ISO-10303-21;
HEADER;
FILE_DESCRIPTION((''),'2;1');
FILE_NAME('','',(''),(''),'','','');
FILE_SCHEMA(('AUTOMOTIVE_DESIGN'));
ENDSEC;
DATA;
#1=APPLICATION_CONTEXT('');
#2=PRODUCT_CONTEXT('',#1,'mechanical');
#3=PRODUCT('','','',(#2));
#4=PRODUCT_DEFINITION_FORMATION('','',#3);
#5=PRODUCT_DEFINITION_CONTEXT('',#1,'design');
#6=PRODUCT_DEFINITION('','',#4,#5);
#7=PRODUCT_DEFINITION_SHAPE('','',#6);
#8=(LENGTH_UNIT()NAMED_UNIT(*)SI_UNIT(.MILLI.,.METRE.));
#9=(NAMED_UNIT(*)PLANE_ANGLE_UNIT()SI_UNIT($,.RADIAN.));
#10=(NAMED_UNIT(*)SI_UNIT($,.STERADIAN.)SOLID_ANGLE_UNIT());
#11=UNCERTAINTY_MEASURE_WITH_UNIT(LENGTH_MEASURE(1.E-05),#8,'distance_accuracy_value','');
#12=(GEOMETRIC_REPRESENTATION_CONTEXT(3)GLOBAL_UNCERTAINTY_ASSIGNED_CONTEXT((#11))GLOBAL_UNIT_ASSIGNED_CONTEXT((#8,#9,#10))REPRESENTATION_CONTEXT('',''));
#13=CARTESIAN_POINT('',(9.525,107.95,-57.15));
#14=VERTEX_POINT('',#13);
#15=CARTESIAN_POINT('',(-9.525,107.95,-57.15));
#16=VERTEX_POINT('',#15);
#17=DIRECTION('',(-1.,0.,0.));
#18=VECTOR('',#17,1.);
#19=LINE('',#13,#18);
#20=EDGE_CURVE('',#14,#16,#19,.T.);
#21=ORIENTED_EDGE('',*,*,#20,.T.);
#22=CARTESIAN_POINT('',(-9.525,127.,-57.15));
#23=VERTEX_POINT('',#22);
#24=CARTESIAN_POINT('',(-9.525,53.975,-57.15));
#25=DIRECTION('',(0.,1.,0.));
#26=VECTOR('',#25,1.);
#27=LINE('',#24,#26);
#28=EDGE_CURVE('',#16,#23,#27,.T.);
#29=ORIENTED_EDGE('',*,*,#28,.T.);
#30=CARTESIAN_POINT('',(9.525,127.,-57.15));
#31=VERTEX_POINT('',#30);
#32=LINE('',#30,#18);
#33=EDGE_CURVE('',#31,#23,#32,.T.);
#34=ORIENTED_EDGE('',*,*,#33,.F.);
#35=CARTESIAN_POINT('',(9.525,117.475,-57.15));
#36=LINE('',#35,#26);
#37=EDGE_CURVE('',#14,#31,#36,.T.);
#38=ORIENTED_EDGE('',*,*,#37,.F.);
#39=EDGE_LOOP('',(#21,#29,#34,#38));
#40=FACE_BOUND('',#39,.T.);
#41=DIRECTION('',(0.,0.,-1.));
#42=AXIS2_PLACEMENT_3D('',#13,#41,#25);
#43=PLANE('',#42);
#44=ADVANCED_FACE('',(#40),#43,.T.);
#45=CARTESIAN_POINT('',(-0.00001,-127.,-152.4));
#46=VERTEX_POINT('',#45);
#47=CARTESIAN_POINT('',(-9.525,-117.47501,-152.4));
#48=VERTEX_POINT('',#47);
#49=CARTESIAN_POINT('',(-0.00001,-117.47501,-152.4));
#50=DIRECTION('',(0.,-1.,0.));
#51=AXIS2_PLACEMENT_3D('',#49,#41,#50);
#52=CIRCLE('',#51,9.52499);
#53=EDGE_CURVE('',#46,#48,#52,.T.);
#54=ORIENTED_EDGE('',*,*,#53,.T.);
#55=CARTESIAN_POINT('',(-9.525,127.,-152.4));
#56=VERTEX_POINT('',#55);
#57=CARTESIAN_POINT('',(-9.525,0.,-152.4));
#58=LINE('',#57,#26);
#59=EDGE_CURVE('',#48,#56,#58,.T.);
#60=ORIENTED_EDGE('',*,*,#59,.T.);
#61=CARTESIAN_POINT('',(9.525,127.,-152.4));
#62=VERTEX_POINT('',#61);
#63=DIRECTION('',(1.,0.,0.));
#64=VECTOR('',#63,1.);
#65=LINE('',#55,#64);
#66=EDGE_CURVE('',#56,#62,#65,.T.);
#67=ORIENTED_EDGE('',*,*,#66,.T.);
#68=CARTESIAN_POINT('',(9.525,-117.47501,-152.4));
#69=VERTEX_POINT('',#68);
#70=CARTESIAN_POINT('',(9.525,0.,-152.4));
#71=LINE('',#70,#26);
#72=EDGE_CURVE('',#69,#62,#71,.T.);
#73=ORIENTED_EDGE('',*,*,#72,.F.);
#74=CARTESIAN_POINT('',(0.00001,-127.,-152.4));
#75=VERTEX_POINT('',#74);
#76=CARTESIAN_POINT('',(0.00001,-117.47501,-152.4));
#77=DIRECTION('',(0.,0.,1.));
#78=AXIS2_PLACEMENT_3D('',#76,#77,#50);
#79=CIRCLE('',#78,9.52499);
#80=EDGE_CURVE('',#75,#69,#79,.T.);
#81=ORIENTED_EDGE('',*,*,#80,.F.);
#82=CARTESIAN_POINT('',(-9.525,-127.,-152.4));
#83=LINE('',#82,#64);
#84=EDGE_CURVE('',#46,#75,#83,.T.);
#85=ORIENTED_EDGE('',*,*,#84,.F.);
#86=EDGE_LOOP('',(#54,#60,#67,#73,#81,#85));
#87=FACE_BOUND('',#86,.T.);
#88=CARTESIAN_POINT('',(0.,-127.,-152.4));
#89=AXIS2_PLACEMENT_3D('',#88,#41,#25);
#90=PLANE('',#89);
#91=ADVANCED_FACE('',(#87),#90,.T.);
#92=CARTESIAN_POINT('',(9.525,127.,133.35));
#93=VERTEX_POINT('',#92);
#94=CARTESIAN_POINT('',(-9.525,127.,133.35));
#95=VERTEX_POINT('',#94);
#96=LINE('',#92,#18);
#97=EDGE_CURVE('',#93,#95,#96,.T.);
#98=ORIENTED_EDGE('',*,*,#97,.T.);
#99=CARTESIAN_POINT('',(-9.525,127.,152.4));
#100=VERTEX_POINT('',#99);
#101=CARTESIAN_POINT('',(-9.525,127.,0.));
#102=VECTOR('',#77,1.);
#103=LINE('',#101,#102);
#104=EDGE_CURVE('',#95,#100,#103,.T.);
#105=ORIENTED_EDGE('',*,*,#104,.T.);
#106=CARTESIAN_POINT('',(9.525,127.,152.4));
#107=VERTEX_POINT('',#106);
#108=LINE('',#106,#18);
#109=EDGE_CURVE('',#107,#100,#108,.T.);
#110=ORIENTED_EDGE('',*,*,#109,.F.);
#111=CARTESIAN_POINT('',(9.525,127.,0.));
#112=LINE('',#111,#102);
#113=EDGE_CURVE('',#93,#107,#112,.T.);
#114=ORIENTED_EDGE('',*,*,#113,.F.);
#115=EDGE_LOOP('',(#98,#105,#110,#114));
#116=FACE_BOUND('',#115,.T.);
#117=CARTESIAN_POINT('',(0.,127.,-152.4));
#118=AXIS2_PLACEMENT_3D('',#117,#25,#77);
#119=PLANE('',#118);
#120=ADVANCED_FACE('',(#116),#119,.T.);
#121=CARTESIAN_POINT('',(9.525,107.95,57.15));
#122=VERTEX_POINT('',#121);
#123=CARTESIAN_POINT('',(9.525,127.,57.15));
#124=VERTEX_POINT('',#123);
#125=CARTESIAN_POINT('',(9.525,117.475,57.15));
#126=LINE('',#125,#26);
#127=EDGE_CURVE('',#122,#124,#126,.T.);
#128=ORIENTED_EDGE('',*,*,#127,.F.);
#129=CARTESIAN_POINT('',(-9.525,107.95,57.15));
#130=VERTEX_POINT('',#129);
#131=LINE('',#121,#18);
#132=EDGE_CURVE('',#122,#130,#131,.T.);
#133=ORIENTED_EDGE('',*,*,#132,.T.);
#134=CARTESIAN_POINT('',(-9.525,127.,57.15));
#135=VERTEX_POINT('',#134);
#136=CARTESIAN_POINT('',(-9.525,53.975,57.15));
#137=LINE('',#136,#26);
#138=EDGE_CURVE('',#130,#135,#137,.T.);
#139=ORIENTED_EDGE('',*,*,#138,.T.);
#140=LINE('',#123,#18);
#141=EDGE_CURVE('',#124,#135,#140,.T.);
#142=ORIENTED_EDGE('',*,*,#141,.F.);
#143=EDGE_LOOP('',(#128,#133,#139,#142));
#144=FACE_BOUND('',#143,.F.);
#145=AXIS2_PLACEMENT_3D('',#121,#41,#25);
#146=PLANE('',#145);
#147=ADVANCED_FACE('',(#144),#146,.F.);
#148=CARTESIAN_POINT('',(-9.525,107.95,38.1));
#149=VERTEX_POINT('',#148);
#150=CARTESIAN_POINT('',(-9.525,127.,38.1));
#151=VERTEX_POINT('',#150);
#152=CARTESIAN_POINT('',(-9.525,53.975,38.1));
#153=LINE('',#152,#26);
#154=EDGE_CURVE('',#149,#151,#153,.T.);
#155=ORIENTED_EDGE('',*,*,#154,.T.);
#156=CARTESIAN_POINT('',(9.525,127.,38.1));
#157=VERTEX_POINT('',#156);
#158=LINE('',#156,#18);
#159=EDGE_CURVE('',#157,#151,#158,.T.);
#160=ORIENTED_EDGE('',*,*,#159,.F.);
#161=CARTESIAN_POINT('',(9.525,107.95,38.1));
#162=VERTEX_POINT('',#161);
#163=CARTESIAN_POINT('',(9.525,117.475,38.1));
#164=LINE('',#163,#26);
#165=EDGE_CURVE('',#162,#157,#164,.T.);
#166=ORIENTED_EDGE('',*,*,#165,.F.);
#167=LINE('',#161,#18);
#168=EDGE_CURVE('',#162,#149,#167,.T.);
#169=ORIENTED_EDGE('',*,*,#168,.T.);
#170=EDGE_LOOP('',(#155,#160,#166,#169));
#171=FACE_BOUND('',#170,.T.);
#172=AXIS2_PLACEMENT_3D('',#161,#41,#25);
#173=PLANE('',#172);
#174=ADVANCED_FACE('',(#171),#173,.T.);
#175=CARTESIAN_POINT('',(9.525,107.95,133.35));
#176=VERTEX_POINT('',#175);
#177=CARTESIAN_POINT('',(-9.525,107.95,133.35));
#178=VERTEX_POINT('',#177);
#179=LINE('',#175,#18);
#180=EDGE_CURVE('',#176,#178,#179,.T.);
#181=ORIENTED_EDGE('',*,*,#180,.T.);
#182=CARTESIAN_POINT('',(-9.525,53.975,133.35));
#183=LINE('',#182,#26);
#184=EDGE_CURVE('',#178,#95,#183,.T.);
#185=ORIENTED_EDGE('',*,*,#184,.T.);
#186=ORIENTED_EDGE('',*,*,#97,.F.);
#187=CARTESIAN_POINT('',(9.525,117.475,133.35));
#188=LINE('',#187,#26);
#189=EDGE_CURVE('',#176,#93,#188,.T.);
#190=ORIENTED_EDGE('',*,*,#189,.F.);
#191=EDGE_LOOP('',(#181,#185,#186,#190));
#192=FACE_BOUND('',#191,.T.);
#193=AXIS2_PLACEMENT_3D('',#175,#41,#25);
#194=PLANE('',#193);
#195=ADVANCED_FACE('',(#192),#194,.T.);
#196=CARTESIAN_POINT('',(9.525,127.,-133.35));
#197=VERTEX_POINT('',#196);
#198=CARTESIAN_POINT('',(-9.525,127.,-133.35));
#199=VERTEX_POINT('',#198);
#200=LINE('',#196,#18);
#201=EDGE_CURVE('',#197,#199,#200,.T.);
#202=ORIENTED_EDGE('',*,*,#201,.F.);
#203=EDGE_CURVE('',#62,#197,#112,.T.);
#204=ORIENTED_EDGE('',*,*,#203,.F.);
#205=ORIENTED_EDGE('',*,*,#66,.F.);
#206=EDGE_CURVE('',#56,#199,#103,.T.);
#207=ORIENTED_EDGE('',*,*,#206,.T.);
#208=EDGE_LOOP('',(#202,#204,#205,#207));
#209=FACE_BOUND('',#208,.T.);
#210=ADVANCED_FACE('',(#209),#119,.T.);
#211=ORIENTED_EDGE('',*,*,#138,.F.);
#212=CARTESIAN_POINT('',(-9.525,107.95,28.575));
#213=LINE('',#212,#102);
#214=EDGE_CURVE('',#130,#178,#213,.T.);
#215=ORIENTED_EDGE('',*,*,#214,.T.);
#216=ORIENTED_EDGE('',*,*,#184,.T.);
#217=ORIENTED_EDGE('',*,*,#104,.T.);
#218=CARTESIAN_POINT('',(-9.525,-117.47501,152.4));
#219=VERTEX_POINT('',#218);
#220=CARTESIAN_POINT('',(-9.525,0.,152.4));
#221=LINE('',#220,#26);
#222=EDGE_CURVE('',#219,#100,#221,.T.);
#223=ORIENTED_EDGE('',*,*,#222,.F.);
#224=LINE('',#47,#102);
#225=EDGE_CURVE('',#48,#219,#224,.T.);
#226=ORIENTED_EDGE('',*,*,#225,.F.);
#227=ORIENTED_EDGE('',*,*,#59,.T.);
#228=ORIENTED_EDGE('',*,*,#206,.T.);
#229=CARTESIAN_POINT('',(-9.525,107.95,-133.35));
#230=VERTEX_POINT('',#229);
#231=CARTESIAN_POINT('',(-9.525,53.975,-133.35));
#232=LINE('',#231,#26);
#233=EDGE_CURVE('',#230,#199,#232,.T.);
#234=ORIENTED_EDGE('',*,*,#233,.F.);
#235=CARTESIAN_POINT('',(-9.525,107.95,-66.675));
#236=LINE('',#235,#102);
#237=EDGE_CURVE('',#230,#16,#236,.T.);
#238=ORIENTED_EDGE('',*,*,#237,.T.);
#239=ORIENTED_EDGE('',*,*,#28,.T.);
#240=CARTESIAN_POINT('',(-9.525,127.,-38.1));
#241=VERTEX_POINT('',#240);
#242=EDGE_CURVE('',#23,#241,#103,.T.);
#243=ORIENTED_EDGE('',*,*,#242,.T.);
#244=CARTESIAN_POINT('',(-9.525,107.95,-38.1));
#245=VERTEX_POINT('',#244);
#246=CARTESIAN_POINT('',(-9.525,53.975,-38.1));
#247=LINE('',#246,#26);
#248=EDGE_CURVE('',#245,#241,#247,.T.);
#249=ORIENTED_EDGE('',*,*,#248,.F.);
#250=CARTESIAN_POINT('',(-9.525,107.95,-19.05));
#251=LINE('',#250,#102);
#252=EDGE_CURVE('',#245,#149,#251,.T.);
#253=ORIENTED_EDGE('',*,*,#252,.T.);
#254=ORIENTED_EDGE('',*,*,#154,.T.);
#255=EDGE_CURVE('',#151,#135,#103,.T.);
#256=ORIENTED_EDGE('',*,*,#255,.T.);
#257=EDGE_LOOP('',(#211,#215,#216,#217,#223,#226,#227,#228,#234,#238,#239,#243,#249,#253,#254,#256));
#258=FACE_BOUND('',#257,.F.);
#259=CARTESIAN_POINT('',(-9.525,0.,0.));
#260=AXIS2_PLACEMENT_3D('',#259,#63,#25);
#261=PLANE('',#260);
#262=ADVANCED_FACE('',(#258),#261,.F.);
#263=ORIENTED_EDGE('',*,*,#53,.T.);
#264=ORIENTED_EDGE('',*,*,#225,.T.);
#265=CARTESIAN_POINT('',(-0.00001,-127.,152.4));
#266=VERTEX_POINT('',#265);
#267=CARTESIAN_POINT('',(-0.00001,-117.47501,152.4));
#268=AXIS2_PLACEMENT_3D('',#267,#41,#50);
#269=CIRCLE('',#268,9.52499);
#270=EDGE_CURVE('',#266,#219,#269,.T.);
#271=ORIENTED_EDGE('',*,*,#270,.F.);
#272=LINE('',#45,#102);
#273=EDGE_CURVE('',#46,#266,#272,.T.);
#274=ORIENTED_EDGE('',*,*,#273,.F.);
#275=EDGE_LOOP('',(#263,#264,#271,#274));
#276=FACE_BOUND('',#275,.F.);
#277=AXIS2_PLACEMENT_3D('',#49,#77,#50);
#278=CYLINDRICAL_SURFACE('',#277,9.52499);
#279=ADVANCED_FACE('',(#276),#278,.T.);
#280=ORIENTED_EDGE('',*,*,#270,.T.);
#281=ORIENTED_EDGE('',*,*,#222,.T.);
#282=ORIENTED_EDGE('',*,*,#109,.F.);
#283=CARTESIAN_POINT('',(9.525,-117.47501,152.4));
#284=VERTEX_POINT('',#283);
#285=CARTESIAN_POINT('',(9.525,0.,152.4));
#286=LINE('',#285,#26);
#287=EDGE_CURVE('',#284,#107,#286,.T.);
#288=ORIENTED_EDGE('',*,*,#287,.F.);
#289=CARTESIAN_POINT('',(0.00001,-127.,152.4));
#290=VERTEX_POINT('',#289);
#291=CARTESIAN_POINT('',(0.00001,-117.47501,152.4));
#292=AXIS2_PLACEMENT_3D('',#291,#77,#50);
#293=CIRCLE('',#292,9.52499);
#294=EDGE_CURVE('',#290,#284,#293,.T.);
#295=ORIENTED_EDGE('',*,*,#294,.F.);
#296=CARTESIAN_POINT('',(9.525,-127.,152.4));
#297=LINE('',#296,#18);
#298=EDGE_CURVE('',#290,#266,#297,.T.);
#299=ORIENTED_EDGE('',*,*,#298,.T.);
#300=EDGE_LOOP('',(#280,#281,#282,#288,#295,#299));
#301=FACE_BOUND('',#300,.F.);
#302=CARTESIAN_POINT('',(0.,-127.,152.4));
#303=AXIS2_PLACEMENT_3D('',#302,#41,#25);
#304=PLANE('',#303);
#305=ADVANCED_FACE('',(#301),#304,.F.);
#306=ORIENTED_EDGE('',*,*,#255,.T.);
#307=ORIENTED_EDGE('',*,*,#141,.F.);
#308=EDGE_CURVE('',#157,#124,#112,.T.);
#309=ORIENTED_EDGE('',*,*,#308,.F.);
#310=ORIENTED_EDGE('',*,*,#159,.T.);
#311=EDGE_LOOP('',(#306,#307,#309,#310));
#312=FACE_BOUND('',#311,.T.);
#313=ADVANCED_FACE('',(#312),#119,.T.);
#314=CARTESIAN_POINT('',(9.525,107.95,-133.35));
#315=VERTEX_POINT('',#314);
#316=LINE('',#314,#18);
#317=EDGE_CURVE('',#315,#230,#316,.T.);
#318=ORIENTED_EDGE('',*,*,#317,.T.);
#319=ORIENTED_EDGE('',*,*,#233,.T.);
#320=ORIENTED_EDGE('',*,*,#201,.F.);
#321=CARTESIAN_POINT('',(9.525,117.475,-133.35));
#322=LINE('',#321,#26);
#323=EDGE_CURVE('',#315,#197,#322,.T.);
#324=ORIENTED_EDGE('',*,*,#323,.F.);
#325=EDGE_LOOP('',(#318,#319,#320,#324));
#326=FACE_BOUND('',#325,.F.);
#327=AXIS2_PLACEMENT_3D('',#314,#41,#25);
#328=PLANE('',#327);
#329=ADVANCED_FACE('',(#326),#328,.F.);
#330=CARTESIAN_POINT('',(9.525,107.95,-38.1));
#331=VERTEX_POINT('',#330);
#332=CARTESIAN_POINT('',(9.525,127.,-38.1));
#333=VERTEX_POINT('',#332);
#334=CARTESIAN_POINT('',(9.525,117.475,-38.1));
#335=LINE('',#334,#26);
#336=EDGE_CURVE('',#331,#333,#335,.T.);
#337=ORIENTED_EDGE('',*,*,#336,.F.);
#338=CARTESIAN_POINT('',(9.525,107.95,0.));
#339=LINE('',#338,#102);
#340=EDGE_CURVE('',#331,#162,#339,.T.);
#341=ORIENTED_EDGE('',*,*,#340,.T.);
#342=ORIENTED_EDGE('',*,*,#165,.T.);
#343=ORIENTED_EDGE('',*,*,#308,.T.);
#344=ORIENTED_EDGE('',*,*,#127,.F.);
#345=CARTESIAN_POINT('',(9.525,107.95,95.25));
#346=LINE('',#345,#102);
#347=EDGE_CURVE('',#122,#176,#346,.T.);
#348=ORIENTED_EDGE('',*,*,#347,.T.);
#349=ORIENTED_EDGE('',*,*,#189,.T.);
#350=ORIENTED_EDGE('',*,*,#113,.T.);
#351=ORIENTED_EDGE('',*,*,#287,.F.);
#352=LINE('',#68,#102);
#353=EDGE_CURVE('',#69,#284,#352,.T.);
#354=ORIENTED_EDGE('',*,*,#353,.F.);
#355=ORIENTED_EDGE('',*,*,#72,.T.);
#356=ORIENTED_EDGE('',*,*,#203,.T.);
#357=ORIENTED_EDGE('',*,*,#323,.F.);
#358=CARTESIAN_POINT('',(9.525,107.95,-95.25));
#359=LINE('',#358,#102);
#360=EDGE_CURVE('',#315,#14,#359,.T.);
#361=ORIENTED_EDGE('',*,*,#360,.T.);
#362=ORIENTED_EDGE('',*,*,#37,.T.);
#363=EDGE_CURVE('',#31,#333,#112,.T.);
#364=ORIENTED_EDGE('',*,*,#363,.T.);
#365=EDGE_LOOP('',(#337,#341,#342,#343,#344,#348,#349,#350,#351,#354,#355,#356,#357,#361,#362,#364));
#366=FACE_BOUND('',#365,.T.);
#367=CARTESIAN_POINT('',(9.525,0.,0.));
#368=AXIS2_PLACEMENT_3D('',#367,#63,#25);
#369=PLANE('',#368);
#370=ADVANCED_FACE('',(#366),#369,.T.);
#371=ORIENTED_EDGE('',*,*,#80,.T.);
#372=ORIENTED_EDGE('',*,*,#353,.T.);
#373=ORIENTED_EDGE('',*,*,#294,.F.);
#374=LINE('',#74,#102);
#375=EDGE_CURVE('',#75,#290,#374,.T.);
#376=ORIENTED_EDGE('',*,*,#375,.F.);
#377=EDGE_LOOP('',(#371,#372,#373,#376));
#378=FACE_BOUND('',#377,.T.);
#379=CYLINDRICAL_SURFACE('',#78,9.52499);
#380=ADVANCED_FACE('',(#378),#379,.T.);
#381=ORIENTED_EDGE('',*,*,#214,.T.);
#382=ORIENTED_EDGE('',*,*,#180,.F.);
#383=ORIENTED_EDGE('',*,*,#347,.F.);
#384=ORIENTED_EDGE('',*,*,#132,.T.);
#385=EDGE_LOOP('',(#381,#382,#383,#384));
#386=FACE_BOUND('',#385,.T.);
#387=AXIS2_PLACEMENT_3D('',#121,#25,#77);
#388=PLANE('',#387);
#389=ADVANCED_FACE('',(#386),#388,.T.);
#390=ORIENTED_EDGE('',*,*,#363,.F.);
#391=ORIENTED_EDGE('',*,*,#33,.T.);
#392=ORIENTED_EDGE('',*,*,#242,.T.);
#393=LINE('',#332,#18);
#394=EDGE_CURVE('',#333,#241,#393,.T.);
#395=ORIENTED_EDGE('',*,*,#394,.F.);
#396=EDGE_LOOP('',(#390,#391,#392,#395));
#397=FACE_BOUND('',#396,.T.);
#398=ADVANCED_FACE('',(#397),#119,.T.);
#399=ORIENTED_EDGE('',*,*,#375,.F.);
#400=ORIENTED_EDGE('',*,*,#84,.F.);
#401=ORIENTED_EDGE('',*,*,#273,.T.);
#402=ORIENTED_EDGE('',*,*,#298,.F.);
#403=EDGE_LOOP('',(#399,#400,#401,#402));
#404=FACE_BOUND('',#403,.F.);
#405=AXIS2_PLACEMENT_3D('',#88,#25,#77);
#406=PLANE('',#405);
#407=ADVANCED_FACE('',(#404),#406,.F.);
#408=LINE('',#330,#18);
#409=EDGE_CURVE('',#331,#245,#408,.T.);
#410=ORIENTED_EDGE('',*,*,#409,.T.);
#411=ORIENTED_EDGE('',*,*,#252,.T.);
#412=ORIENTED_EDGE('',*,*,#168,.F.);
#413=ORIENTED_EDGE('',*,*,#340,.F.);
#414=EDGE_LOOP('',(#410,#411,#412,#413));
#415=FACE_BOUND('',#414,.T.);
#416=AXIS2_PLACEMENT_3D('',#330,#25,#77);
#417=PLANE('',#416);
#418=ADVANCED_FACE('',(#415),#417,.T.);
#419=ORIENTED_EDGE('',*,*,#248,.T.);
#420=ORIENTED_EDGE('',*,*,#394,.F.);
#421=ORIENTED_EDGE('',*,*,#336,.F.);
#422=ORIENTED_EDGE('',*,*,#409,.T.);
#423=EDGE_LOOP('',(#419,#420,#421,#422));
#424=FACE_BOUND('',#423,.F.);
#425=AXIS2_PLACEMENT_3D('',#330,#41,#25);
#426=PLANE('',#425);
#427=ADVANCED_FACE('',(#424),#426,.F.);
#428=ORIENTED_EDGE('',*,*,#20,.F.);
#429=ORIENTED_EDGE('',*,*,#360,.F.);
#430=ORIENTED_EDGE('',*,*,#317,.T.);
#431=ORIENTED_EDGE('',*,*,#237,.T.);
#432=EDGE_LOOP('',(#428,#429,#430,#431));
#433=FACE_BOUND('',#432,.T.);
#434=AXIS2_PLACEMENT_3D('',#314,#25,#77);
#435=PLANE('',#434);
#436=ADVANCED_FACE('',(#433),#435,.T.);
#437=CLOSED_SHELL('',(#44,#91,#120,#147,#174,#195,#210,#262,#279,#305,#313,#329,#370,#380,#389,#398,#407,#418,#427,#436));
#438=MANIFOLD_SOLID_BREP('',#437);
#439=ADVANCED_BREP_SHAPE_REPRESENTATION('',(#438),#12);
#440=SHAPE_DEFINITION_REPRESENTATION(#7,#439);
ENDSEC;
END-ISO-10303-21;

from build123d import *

# Parameters (mm, degrees)
F0_W     = 254
F0_H     = 304.8
F1_DEPTH = 9.525
F2_R     = 9.52499
F3_W     = 19.05
F3_H     = 76.2
F4_DEPTH = 19.051


# Not quite as in the source:
# - a fillet or chamfer is up to 0.001 mm smaller than in the source, because OpenCascade refuses the exact size
# - a feature names something its author has since deleted; it is built from what else it names


with BuildPart() as f1:
    # F0 (on Right) → F1 (new body, symmetric)
    with BuildSketch(Plane.YZ):
        Rectangle(F0_W, F0_H)
    extrude(amount=F1_DEPTH, both=True)

    # F2 (radius 9.525 in the source; OpenCascade refuses exactly that, so slightly less here)
    f2_edges = [f1.edges().sort_by_distance(p)[0] for p in [
        (9.525, -127, 0),
        (-9.525, -127, 0),
    ]]
    fillet(f2_edges, radius=F2_R)

    # F3 (on face) → F4 (cut, through all)
    with BuildSketch(Plane.YZ.offset(9.525)):
        with Locations((117.475, 95.25)):
            Rectangle(F3_W, F3_H)
        with Locations((117.475, 0)):
            Rectangle(F3_W, F3_H)
        with Locations((117.475, -95.25)):
            Rectangle(F3_W, F3_H)
    extrude(amount=-F4_DEPTH, mode=Mode.SUBTRACT)


solid = f1.part
